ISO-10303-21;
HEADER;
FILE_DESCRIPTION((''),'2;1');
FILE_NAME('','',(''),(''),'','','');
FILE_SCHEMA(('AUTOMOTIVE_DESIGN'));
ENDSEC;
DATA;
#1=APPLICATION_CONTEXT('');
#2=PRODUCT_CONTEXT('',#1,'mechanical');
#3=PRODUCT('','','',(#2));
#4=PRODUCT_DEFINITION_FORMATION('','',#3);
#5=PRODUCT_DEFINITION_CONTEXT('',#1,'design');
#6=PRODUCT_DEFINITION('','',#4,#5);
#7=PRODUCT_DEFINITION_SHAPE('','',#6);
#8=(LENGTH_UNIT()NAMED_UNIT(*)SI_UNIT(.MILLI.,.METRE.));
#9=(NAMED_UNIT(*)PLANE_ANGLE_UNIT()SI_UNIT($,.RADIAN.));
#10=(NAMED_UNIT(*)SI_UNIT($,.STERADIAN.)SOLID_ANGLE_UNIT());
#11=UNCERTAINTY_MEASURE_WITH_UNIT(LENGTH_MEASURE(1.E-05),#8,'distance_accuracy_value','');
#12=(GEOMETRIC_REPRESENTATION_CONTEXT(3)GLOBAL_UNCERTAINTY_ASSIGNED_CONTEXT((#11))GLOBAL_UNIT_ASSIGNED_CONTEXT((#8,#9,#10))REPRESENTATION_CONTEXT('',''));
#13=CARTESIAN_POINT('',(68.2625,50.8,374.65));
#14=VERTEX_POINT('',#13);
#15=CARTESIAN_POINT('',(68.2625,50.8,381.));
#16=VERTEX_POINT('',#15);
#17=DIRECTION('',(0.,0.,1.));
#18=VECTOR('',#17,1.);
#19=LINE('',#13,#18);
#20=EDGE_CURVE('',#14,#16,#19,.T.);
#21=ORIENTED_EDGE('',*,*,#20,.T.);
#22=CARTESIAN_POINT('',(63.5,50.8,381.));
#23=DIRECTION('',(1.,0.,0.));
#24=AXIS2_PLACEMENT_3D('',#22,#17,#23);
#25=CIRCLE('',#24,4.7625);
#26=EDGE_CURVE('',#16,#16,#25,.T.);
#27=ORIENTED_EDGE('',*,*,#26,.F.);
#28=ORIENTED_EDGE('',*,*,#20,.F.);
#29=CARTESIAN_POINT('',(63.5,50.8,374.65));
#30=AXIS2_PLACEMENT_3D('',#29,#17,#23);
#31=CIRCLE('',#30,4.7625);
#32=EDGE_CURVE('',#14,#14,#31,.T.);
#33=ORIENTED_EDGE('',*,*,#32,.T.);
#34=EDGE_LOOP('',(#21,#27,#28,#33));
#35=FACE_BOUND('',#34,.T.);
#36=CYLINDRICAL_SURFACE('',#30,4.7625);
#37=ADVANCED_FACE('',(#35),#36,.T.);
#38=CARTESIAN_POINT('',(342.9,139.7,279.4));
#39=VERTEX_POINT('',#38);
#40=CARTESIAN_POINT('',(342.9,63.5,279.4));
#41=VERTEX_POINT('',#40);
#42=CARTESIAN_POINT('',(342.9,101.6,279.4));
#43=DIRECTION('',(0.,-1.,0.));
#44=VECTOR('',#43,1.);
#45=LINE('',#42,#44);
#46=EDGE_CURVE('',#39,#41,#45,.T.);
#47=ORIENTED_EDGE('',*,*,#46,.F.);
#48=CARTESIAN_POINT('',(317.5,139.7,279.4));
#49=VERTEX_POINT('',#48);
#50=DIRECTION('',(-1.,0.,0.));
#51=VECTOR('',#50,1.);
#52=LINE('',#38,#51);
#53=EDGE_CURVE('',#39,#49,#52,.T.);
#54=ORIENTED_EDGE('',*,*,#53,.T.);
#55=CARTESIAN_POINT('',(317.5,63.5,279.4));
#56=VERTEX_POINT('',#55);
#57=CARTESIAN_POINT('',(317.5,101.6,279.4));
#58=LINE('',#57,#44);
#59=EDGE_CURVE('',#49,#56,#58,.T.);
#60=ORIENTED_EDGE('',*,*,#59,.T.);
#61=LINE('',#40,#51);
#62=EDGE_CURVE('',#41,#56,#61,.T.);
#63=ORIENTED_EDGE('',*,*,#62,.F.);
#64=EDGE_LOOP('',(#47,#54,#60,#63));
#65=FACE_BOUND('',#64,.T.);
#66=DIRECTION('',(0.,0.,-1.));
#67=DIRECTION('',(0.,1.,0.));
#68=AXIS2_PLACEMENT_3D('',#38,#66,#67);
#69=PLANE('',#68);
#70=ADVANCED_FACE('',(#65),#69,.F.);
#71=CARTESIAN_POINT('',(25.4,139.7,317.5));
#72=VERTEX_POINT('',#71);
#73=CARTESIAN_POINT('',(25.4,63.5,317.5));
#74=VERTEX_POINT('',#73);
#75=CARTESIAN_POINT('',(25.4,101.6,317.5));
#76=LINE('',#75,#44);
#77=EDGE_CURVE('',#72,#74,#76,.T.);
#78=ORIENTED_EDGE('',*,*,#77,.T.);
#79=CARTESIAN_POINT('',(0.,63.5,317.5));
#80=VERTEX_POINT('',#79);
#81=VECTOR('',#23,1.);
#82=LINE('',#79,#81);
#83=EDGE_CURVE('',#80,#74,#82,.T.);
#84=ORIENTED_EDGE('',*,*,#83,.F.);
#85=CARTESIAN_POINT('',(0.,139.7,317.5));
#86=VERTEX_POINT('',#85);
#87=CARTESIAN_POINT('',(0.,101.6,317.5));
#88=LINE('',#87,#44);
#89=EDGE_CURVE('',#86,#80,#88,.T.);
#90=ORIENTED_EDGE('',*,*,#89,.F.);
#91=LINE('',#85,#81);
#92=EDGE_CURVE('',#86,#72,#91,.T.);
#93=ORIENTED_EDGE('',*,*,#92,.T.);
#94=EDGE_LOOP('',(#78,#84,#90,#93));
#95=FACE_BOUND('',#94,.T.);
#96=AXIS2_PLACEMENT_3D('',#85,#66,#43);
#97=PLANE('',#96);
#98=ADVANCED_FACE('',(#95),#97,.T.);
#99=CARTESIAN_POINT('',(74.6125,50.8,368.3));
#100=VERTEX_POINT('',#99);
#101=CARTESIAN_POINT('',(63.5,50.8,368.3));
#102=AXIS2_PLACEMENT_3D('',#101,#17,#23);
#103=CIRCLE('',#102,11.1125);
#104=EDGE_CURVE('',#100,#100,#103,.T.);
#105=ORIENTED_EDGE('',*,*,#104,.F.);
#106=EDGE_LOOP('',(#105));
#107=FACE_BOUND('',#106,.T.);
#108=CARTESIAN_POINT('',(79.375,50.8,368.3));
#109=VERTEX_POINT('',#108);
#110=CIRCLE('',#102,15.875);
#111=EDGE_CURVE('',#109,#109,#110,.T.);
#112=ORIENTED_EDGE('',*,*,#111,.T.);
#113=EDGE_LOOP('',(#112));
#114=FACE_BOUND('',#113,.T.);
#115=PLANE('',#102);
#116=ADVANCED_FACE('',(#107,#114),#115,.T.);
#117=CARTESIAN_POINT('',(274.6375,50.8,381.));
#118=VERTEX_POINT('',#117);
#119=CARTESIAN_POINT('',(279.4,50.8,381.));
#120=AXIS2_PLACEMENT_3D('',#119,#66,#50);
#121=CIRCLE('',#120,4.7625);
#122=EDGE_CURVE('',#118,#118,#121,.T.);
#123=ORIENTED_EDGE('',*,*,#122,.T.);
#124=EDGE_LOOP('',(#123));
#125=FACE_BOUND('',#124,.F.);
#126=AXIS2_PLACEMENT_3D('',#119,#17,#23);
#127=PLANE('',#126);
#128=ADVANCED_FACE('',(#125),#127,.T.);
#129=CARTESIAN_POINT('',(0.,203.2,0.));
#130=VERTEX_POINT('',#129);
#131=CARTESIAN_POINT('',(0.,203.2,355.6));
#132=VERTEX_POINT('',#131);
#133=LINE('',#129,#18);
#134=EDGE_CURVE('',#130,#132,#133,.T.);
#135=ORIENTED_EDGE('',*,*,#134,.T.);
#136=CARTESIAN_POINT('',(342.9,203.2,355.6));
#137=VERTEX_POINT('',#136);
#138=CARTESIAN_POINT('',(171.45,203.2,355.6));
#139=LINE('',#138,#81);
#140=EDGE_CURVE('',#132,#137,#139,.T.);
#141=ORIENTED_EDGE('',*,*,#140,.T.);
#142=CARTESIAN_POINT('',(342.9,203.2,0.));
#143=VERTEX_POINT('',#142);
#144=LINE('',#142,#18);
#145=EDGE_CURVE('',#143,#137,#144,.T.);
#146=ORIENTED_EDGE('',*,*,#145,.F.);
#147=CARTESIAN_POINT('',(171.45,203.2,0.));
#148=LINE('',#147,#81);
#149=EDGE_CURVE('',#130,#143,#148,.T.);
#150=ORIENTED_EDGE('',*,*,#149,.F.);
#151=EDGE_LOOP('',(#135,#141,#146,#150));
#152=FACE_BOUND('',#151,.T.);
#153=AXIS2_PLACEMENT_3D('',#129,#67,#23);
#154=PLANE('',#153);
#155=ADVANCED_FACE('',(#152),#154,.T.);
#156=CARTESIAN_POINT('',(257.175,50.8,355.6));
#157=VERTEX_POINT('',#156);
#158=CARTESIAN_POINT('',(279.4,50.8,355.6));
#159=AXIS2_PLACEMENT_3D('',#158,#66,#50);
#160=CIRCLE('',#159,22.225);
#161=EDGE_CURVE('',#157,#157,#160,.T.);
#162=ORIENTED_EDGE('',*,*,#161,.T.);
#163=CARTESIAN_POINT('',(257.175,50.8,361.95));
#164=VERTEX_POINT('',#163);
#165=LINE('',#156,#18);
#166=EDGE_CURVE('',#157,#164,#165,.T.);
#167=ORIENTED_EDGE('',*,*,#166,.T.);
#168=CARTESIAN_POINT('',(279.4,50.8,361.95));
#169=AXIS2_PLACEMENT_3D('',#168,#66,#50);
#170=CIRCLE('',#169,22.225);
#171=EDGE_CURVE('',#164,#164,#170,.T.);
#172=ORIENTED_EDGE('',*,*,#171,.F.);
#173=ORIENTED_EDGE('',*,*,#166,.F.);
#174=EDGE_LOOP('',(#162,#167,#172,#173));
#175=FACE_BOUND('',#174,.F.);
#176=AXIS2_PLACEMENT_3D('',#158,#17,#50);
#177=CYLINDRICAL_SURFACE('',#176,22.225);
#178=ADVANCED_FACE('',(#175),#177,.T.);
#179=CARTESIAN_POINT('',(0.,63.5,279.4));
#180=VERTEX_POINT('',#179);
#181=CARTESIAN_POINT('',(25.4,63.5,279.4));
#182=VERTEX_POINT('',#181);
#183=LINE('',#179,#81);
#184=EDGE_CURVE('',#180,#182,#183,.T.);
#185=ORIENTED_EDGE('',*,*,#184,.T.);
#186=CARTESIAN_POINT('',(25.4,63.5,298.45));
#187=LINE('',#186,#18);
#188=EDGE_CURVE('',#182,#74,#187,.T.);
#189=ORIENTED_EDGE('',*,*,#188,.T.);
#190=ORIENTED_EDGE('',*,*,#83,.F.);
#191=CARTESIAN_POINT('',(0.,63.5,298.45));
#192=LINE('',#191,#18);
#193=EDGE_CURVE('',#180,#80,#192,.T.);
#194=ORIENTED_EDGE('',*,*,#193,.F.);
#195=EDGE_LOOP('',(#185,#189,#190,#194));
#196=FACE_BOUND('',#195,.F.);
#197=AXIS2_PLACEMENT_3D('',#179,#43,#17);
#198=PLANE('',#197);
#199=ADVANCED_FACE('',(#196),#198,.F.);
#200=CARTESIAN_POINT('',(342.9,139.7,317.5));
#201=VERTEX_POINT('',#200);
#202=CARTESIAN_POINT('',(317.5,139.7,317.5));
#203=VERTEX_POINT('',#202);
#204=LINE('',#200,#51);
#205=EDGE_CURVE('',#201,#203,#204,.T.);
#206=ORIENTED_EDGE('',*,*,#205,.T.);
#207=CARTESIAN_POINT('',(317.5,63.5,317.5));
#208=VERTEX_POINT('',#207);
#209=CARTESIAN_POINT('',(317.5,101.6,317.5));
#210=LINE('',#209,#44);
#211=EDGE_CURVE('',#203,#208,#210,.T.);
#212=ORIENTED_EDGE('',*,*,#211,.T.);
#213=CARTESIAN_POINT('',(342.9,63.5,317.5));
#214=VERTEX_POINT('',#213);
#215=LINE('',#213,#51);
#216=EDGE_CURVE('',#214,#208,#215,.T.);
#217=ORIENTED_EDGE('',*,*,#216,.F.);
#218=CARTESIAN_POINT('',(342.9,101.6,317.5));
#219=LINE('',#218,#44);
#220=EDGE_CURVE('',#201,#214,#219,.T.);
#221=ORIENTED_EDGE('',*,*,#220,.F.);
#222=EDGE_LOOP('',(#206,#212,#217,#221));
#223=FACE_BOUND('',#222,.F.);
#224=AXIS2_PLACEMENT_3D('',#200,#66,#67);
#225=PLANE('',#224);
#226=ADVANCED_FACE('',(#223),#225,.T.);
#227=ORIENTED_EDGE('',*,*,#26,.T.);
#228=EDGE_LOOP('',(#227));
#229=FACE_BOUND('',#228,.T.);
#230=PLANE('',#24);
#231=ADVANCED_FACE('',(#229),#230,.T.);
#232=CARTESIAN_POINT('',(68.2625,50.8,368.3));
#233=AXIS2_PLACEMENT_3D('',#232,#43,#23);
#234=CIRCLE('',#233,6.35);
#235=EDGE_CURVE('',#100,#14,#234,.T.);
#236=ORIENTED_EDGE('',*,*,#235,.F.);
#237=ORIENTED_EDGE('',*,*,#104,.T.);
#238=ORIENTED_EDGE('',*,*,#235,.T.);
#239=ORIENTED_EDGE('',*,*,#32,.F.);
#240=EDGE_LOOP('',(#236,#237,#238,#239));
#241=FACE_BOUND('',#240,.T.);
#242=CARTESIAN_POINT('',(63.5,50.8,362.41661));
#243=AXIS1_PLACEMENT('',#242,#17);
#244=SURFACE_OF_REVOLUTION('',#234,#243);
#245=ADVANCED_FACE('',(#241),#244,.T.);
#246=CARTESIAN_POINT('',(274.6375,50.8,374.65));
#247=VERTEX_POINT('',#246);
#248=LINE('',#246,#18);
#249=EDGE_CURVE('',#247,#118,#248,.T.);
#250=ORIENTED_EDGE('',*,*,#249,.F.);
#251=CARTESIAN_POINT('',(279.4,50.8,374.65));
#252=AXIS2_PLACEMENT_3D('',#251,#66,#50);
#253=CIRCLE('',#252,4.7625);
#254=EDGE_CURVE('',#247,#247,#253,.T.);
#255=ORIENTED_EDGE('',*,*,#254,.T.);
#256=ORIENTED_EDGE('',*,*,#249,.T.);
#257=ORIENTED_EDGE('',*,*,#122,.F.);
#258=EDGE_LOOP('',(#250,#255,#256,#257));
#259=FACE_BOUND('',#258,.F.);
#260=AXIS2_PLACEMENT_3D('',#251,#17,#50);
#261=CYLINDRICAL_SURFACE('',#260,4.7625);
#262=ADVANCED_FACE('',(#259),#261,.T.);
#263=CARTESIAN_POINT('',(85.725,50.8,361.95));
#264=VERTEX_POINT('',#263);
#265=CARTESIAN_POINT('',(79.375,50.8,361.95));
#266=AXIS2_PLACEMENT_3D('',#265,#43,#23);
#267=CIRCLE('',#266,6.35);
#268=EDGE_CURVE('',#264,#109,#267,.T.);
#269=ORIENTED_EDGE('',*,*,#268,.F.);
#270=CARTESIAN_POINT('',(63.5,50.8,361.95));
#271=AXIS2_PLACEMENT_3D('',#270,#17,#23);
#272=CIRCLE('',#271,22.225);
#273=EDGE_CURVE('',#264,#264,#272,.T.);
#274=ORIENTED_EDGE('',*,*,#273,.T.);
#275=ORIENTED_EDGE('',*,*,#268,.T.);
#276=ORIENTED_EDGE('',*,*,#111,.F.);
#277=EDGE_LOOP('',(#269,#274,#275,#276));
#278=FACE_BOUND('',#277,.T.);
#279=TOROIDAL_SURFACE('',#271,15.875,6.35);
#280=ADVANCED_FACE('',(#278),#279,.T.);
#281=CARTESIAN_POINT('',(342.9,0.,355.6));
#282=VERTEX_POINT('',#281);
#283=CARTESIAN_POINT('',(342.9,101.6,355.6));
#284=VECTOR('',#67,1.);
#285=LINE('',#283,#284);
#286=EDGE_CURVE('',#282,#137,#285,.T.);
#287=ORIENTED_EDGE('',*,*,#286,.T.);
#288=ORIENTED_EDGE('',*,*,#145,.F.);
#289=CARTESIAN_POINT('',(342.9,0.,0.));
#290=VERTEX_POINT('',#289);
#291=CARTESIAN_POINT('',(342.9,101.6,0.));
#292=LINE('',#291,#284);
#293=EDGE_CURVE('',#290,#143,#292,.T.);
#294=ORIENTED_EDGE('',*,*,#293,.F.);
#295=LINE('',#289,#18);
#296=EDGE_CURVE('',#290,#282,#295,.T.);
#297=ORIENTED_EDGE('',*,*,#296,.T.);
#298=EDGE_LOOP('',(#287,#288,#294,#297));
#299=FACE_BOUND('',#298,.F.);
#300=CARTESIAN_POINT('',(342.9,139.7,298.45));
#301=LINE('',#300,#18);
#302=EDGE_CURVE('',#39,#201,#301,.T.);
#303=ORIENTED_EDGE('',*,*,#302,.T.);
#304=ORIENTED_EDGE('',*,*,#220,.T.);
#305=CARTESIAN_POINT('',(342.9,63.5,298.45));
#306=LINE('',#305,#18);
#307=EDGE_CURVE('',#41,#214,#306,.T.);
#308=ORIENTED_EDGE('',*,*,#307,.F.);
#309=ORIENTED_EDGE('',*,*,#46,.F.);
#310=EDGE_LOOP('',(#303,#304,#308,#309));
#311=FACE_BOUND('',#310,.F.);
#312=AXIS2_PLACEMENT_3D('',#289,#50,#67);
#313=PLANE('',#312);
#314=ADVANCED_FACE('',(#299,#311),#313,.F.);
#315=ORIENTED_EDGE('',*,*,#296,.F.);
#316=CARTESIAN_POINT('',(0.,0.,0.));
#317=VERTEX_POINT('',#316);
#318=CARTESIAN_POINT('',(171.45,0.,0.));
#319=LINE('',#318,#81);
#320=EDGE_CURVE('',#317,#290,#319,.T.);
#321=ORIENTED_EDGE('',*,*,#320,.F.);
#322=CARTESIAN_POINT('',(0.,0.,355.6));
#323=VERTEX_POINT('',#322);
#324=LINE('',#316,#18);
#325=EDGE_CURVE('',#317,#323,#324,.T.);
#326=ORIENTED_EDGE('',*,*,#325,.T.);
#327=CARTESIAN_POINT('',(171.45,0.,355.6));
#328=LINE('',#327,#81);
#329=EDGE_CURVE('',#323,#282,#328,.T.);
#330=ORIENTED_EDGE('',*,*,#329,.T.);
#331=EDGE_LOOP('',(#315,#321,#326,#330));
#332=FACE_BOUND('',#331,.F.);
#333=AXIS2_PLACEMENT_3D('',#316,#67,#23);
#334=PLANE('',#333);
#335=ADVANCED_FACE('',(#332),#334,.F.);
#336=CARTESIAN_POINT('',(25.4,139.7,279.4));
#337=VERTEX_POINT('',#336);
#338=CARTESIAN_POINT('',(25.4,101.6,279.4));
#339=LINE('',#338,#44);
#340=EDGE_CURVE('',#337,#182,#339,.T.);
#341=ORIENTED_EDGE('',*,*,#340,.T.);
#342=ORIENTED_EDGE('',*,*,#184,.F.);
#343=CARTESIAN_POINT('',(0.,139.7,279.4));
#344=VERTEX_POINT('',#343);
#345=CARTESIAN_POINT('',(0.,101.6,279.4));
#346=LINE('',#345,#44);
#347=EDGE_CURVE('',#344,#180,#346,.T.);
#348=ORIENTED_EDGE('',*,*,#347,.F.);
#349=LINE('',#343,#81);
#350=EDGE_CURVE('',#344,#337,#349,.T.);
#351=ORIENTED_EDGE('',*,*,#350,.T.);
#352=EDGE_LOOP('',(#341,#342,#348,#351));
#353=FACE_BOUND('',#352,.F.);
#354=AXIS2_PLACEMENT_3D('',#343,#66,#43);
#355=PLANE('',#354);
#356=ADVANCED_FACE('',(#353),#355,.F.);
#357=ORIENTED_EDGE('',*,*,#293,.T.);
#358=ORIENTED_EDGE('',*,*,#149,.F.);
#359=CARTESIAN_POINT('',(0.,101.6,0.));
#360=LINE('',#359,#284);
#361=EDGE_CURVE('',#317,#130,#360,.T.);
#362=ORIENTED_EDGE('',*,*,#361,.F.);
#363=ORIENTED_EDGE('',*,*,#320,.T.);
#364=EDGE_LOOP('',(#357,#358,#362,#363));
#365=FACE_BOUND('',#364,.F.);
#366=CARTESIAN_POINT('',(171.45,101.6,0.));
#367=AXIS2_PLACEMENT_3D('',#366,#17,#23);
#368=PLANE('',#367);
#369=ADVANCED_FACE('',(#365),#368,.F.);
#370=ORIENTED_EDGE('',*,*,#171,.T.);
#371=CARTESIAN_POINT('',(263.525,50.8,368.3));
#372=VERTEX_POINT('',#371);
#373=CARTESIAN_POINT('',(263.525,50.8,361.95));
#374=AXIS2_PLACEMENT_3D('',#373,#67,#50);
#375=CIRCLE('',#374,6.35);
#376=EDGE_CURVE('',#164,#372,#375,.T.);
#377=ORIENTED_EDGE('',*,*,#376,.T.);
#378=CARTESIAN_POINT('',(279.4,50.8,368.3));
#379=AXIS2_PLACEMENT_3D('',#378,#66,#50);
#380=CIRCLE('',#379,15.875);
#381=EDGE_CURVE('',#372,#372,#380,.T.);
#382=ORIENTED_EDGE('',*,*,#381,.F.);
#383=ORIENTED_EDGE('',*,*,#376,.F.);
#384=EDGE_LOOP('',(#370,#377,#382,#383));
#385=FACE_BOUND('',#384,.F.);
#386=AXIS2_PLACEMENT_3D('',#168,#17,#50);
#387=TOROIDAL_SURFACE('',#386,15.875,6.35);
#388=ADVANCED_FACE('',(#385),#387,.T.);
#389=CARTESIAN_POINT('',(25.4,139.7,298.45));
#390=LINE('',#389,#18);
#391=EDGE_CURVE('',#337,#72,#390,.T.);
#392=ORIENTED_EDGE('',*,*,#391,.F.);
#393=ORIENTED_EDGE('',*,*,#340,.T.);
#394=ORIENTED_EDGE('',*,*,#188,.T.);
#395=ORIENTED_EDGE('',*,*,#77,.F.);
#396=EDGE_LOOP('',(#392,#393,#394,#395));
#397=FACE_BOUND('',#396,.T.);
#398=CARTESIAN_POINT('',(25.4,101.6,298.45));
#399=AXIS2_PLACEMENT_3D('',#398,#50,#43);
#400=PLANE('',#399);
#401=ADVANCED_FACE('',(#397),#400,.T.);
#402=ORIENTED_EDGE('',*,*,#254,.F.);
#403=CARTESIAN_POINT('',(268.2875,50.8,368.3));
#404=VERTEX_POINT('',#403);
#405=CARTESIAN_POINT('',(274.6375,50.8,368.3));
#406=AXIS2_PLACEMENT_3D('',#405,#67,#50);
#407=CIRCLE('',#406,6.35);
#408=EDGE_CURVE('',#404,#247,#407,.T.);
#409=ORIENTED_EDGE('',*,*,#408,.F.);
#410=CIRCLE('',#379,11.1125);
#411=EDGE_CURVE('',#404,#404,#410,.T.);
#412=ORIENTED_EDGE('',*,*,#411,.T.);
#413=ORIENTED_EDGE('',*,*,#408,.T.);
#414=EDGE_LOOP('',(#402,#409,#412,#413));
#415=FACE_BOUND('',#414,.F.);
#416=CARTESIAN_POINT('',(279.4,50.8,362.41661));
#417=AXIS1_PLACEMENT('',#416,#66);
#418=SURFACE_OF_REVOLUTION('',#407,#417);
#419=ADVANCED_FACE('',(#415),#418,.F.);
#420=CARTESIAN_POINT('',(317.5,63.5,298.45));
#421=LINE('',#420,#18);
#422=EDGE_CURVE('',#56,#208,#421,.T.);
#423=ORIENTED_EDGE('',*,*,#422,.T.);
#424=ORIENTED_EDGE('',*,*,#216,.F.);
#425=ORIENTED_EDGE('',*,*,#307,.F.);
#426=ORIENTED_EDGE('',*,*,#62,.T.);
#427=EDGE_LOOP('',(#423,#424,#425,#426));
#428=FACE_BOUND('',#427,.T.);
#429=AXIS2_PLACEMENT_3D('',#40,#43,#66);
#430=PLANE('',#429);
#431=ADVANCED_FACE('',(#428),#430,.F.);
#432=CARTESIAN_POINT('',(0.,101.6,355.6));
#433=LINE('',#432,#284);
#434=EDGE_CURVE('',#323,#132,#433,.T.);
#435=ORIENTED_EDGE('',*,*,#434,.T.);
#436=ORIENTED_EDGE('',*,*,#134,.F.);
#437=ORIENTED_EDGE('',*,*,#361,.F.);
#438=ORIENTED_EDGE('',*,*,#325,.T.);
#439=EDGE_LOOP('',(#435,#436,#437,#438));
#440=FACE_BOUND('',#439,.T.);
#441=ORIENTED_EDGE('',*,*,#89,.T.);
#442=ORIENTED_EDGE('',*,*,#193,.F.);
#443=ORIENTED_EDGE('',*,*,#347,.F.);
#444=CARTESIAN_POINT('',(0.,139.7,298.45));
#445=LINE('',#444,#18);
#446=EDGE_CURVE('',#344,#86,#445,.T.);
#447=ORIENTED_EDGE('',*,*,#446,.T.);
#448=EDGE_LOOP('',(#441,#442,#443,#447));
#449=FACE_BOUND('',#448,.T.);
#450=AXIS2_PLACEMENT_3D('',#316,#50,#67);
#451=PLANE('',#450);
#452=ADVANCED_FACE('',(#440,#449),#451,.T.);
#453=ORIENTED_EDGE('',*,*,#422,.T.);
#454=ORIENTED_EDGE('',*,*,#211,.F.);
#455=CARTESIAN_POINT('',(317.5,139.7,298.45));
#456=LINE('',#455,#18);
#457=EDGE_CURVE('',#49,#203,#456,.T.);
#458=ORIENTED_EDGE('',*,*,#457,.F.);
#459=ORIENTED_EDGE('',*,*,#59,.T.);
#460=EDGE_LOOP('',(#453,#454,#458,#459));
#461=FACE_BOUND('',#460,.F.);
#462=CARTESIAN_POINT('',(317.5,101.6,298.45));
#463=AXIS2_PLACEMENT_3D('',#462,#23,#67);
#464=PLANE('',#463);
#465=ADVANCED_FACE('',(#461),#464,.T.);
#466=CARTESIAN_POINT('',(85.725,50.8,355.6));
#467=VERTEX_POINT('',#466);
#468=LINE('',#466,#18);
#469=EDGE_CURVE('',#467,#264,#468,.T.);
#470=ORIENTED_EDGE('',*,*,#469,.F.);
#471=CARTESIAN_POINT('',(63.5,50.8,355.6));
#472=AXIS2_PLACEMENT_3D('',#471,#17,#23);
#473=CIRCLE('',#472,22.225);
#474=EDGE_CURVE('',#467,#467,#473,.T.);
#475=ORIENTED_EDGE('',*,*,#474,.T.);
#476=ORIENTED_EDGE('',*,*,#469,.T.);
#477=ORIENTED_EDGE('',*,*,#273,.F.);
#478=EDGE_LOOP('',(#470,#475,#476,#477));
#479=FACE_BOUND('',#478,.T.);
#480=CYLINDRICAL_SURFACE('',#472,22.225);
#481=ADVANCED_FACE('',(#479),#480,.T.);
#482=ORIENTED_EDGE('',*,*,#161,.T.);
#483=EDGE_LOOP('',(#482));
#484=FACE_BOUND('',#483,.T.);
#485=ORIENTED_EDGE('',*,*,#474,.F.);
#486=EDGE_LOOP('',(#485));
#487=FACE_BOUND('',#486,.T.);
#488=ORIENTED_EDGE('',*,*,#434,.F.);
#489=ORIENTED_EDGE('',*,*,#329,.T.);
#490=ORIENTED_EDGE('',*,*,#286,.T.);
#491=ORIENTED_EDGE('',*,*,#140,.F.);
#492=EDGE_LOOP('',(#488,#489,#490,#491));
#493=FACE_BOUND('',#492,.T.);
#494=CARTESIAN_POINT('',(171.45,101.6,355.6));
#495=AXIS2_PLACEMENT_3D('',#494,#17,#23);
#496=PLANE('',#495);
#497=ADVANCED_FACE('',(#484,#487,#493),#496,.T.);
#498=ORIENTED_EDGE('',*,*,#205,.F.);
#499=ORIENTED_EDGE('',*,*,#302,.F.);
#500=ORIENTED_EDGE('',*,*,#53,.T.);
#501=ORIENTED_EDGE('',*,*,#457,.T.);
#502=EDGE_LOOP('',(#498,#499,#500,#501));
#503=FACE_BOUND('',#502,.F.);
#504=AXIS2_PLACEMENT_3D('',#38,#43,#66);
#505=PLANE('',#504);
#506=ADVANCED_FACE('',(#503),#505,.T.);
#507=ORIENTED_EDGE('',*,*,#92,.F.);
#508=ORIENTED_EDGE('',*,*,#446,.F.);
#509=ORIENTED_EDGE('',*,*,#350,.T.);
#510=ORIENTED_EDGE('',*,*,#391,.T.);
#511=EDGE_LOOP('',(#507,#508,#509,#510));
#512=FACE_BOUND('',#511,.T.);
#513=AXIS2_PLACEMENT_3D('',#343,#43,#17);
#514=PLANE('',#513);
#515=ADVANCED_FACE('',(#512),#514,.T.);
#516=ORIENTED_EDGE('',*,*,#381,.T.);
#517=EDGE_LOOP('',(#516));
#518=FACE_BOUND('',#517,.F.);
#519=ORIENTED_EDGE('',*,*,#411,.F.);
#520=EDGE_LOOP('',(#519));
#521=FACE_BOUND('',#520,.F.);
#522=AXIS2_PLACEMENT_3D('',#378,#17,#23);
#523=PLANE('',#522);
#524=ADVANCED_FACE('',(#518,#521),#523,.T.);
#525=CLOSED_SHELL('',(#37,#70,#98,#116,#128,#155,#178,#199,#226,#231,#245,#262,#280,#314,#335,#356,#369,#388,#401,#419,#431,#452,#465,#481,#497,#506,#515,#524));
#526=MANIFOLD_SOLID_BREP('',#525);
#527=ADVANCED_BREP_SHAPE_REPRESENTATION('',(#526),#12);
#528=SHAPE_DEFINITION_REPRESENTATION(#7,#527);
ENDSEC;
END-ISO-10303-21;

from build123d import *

# Parameters (mm, degrees)
F0_W     = 342.9
F0_H     = 203.2
F1_DEPTH = 355.6
F6_W     = 76.2
F6_H     = 38.1
F7_DEPTH = 25.4


# Not quite as in the source:
# - a pattern or mirror of a feature is missing from the dataset's text; its kind, count and spacing are read off the source's solid


with BuildPart() as f1:
    # F0 (on Top) → F1 (new body)
    with BuildSketch(Plane.XY):
        with Locations((171.45, 101.6)):
            Rectangle(F0_W, F0_H)
    extrude(amount=F1_DEPTH)

    # F3 (on offset) → F4 (revolve)
    with BuildSketch(Plane.XZ.offset(-50.8)):
        with BuildLine():
            Line((63.5, 381), (63.5, 355.6))
            Line((63.5, 355.6), (85.725, 355.6))
            Line((85.725, 355.6), (85.725, 361.95))
            ThreePointArc((85.725, 361.95), (83.8651280605, 366.4401280605), (79.375, 368.3))
            Line((79.375, 368.3), (74.6125, 368.3))
            ThreePointArc((74.6125, 368.3), (72.7526280605, 372.7901280605), (68.2625, 374.65))
            Line((68.2625, 374.65), (68.2625, 381))
            Line((68.2625, 381), (63.5, 381))
        make_face()
    f4 = revolve(axis=Axis((63.5, 50.8, 362.4166101217), (0, 0, 1)))

    # F4_copies: F4 across plane
    add(f4.mirror(Plane(origin=(171.45, 0, 0), x_dir=(0, 0, 1), z_dir=(1, 0, 0))))

    # F6 (on face) → F7 (cut)
    with BuildSketch(Plane(origin=(0, 0, 0), x_dir=(0, -1, 0), z_dir=(-1, 0, 0))):
        with Locations((-101.6, 298.45)):
            Rectangle(F6_W, F6_H)
    f7 = extrude(amount=-F7_DEPTH, mode=Mode.SUBTRACT)

    # F7_copies: F7 across plane
    add(f7.mirror(Plane(origin=(171.45, 0, 0), x_dir=(0, 0, 1), z_dir=(1, 0, 0))), mode=Mode.SUBTRACT)


solid = f1.part
